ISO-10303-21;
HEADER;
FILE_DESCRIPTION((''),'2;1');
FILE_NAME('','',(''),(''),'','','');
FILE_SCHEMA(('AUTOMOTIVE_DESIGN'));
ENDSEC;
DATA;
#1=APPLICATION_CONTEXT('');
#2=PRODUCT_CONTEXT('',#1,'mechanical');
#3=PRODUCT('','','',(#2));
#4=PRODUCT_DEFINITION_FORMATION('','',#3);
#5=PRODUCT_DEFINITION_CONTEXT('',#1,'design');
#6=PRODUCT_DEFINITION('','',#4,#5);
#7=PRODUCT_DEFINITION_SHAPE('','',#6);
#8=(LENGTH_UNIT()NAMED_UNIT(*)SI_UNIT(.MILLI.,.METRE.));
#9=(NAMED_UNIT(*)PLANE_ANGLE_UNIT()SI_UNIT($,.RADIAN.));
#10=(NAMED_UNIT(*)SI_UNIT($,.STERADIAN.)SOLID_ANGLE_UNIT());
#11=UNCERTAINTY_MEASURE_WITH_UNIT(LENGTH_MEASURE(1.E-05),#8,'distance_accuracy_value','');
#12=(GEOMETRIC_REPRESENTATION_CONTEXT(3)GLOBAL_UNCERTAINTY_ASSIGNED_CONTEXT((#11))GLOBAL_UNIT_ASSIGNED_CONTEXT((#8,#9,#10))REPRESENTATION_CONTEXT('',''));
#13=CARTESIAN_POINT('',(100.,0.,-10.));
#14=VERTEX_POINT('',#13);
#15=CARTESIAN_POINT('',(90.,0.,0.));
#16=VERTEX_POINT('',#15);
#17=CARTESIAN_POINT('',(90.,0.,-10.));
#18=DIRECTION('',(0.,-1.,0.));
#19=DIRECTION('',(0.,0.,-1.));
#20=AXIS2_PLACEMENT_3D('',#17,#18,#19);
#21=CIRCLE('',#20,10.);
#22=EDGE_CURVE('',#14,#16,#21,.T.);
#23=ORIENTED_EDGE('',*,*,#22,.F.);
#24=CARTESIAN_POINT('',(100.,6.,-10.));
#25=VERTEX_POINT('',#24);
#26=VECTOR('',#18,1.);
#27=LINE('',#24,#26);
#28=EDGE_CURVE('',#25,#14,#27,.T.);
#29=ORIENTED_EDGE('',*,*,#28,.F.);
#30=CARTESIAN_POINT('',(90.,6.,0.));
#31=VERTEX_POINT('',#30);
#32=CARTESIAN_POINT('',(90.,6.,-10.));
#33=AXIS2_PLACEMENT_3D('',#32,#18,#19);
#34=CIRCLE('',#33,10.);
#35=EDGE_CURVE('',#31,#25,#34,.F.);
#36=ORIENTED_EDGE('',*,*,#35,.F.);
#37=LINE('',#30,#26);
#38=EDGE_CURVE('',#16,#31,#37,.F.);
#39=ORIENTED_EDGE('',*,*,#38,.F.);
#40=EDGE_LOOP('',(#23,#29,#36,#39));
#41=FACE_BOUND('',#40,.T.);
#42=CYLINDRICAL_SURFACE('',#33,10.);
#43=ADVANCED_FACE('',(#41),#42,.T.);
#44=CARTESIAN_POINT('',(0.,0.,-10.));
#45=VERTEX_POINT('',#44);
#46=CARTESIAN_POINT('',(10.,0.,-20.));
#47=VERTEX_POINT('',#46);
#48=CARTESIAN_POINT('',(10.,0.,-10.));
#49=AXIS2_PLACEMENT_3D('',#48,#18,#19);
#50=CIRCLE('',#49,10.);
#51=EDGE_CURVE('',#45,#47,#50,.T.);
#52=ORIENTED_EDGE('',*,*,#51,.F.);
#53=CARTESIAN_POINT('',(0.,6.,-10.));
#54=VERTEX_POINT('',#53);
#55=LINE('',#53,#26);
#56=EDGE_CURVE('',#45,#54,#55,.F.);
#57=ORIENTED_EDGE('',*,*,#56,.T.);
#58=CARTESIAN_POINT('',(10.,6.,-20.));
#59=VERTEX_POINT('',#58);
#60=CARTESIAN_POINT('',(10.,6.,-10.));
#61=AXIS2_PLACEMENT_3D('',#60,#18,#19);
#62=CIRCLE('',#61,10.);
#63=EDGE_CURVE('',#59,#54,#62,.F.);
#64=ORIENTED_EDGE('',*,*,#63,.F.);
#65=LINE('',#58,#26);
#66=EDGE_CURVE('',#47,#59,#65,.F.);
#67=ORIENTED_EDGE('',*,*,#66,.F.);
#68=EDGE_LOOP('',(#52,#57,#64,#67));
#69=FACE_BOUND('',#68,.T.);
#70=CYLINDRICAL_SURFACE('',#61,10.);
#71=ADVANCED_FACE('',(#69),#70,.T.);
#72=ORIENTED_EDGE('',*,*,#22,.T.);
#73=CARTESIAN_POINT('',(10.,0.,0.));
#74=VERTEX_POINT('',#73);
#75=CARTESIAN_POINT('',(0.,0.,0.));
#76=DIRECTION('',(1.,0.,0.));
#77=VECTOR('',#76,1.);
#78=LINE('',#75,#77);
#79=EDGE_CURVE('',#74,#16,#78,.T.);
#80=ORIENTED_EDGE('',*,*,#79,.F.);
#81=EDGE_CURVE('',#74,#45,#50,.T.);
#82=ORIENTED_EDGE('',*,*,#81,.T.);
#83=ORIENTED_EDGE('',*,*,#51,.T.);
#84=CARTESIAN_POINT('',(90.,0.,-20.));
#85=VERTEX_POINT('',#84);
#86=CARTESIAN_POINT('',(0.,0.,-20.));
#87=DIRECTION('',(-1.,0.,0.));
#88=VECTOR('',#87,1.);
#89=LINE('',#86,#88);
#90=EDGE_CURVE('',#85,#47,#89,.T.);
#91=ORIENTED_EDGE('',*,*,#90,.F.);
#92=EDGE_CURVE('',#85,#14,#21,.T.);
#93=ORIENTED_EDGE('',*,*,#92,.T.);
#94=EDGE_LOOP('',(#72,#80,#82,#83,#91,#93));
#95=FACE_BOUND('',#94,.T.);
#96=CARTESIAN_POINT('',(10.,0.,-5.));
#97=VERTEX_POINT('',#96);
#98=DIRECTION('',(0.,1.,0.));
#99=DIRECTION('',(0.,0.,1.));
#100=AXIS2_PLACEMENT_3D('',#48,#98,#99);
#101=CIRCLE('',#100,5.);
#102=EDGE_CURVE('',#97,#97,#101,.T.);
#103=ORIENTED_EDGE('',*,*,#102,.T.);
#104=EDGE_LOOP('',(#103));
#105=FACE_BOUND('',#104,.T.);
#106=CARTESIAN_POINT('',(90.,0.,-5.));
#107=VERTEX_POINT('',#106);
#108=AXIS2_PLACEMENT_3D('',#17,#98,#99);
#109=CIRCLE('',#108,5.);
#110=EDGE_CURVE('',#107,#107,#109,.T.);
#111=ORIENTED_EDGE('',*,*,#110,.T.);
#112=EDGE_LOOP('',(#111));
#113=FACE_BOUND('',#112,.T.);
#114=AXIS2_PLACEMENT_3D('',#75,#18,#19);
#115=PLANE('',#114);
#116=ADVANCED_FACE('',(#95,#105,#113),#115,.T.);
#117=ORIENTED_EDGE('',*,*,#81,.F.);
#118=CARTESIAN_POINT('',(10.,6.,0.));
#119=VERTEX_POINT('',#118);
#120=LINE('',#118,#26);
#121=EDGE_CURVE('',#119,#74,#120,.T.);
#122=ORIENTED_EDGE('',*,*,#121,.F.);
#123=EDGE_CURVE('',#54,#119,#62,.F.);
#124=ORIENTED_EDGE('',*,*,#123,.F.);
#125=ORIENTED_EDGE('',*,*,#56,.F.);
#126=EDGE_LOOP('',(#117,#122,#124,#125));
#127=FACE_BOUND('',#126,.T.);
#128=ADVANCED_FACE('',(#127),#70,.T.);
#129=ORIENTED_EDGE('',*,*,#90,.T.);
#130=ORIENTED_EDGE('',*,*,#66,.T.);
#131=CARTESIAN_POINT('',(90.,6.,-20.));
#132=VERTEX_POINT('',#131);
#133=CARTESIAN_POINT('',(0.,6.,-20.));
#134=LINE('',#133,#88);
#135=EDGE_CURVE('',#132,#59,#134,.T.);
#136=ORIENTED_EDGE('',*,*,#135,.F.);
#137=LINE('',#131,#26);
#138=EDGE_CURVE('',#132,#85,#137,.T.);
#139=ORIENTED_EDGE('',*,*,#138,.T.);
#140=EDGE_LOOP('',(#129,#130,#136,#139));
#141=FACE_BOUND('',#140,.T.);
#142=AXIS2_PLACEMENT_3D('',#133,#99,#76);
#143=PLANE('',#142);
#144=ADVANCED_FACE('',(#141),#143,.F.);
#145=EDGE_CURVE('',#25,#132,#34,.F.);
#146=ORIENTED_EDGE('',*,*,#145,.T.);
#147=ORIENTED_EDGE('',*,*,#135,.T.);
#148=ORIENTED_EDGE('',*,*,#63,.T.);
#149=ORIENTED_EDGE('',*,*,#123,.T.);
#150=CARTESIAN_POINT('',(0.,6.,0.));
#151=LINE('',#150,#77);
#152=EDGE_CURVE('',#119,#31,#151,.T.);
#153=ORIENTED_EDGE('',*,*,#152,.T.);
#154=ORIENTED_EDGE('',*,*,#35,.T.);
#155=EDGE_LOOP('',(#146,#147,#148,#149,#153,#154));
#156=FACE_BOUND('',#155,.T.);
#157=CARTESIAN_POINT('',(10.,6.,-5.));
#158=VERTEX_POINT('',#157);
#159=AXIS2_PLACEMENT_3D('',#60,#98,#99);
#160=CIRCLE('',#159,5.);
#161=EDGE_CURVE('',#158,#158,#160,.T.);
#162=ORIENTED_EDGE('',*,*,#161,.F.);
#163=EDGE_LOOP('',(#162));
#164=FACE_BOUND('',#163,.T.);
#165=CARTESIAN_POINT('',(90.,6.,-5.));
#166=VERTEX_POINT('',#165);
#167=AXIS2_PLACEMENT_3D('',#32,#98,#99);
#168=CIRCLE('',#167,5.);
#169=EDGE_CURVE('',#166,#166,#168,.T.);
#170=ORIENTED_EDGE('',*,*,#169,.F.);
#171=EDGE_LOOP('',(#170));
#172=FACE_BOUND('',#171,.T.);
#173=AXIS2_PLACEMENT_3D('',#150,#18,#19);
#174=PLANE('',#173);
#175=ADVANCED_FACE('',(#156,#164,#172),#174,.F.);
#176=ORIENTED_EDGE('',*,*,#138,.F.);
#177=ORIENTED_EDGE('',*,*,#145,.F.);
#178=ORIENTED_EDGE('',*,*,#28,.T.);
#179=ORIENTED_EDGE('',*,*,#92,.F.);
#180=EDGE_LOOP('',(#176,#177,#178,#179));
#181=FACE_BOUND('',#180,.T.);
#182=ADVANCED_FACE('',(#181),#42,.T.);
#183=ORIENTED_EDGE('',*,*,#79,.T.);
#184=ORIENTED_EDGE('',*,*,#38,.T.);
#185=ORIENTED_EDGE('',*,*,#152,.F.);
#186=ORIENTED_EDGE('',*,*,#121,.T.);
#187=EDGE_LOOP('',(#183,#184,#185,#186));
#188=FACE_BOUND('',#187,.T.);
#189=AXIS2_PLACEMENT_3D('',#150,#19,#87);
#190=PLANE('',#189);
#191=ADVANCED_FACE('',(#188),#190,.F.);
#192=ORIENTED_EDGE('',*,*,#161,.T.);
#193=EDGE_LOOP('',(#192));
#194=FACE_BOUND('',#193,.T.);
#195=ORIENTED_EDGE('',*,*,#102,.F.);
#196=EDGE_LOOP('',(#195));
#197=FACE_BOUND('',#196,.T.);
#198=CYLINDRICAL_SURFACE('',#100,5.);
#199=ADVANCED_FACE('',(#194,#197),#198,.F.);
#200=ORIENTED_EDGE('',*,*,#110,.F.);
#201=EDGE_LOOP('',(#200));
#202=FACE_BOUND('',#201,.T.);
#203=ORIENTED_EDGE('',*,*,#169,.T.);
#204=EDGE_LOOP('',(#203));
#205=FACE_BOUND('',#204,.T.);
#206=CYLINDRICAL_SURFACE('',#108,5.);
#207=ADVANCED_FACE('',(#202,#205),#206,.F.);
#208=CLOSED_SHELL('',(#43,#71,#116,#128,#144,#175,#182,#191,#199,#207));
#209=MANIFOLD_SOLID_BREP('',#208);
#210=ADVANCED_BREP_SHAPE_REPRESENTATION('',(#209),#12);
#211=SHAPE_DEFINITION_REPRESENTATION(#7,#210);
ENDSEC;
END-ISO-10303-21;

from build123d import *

# Parameters (mm, degrees)
SKETCH1_W           = 100
SKETCH1_H           = 20
BOSS_EXTRUDE1_DEPTH = 6
FILLET1_R           = 10
SKETCH2_R           = 5
CUT_EXTRUDE1_DEPTH  = 103.156742313


with BuildPart() as part:
    # Sketch1 → Boss-Extrude1 (new body)
    with BuildSketch(Plane(origin=(0, 0, 0), x_dir=(1, 0, 0), z_dir=(0, 1, 0))):
        with Locations((50, 10)):
            Rectangle(SKETCH1_W, SKETCH1_H)
    extrude(amount=BOSS_EXTRUDE1_DEPTH)

    # Fillet1
    fillet1_edges = [part.edges().sort_by_distance(p)[0] for p in [
        (100, 3, -20),
        (100, 3, 0),
        (0, 3, -20),
        (0, 3, 0),
    ]]
    fillet(fillet1_edges, radius=FILLET1_R - 0.0001)  # a hair under: the kernel refuses the full size

    # Sketch2 → Cut-Extrude1 (cut, through all)
    with BuildSketch(Plane(origin=(0, 6, 0), x_dir=(1, 0, 0), z_dir=(0, 1, 0))):
        with Locations(Location((10, 10, 0), (0, 0, 270))):
            Circle(SKETCH2_R)
        with Locations(Location((90, 10, 0), (0, 0, 270))):
            Circle(SKETCH2_R)
    extrude(amount=-CUT_EXTRUDE1_DEPTH, mode=Mode.SUBTRACT)


solid = part.part
